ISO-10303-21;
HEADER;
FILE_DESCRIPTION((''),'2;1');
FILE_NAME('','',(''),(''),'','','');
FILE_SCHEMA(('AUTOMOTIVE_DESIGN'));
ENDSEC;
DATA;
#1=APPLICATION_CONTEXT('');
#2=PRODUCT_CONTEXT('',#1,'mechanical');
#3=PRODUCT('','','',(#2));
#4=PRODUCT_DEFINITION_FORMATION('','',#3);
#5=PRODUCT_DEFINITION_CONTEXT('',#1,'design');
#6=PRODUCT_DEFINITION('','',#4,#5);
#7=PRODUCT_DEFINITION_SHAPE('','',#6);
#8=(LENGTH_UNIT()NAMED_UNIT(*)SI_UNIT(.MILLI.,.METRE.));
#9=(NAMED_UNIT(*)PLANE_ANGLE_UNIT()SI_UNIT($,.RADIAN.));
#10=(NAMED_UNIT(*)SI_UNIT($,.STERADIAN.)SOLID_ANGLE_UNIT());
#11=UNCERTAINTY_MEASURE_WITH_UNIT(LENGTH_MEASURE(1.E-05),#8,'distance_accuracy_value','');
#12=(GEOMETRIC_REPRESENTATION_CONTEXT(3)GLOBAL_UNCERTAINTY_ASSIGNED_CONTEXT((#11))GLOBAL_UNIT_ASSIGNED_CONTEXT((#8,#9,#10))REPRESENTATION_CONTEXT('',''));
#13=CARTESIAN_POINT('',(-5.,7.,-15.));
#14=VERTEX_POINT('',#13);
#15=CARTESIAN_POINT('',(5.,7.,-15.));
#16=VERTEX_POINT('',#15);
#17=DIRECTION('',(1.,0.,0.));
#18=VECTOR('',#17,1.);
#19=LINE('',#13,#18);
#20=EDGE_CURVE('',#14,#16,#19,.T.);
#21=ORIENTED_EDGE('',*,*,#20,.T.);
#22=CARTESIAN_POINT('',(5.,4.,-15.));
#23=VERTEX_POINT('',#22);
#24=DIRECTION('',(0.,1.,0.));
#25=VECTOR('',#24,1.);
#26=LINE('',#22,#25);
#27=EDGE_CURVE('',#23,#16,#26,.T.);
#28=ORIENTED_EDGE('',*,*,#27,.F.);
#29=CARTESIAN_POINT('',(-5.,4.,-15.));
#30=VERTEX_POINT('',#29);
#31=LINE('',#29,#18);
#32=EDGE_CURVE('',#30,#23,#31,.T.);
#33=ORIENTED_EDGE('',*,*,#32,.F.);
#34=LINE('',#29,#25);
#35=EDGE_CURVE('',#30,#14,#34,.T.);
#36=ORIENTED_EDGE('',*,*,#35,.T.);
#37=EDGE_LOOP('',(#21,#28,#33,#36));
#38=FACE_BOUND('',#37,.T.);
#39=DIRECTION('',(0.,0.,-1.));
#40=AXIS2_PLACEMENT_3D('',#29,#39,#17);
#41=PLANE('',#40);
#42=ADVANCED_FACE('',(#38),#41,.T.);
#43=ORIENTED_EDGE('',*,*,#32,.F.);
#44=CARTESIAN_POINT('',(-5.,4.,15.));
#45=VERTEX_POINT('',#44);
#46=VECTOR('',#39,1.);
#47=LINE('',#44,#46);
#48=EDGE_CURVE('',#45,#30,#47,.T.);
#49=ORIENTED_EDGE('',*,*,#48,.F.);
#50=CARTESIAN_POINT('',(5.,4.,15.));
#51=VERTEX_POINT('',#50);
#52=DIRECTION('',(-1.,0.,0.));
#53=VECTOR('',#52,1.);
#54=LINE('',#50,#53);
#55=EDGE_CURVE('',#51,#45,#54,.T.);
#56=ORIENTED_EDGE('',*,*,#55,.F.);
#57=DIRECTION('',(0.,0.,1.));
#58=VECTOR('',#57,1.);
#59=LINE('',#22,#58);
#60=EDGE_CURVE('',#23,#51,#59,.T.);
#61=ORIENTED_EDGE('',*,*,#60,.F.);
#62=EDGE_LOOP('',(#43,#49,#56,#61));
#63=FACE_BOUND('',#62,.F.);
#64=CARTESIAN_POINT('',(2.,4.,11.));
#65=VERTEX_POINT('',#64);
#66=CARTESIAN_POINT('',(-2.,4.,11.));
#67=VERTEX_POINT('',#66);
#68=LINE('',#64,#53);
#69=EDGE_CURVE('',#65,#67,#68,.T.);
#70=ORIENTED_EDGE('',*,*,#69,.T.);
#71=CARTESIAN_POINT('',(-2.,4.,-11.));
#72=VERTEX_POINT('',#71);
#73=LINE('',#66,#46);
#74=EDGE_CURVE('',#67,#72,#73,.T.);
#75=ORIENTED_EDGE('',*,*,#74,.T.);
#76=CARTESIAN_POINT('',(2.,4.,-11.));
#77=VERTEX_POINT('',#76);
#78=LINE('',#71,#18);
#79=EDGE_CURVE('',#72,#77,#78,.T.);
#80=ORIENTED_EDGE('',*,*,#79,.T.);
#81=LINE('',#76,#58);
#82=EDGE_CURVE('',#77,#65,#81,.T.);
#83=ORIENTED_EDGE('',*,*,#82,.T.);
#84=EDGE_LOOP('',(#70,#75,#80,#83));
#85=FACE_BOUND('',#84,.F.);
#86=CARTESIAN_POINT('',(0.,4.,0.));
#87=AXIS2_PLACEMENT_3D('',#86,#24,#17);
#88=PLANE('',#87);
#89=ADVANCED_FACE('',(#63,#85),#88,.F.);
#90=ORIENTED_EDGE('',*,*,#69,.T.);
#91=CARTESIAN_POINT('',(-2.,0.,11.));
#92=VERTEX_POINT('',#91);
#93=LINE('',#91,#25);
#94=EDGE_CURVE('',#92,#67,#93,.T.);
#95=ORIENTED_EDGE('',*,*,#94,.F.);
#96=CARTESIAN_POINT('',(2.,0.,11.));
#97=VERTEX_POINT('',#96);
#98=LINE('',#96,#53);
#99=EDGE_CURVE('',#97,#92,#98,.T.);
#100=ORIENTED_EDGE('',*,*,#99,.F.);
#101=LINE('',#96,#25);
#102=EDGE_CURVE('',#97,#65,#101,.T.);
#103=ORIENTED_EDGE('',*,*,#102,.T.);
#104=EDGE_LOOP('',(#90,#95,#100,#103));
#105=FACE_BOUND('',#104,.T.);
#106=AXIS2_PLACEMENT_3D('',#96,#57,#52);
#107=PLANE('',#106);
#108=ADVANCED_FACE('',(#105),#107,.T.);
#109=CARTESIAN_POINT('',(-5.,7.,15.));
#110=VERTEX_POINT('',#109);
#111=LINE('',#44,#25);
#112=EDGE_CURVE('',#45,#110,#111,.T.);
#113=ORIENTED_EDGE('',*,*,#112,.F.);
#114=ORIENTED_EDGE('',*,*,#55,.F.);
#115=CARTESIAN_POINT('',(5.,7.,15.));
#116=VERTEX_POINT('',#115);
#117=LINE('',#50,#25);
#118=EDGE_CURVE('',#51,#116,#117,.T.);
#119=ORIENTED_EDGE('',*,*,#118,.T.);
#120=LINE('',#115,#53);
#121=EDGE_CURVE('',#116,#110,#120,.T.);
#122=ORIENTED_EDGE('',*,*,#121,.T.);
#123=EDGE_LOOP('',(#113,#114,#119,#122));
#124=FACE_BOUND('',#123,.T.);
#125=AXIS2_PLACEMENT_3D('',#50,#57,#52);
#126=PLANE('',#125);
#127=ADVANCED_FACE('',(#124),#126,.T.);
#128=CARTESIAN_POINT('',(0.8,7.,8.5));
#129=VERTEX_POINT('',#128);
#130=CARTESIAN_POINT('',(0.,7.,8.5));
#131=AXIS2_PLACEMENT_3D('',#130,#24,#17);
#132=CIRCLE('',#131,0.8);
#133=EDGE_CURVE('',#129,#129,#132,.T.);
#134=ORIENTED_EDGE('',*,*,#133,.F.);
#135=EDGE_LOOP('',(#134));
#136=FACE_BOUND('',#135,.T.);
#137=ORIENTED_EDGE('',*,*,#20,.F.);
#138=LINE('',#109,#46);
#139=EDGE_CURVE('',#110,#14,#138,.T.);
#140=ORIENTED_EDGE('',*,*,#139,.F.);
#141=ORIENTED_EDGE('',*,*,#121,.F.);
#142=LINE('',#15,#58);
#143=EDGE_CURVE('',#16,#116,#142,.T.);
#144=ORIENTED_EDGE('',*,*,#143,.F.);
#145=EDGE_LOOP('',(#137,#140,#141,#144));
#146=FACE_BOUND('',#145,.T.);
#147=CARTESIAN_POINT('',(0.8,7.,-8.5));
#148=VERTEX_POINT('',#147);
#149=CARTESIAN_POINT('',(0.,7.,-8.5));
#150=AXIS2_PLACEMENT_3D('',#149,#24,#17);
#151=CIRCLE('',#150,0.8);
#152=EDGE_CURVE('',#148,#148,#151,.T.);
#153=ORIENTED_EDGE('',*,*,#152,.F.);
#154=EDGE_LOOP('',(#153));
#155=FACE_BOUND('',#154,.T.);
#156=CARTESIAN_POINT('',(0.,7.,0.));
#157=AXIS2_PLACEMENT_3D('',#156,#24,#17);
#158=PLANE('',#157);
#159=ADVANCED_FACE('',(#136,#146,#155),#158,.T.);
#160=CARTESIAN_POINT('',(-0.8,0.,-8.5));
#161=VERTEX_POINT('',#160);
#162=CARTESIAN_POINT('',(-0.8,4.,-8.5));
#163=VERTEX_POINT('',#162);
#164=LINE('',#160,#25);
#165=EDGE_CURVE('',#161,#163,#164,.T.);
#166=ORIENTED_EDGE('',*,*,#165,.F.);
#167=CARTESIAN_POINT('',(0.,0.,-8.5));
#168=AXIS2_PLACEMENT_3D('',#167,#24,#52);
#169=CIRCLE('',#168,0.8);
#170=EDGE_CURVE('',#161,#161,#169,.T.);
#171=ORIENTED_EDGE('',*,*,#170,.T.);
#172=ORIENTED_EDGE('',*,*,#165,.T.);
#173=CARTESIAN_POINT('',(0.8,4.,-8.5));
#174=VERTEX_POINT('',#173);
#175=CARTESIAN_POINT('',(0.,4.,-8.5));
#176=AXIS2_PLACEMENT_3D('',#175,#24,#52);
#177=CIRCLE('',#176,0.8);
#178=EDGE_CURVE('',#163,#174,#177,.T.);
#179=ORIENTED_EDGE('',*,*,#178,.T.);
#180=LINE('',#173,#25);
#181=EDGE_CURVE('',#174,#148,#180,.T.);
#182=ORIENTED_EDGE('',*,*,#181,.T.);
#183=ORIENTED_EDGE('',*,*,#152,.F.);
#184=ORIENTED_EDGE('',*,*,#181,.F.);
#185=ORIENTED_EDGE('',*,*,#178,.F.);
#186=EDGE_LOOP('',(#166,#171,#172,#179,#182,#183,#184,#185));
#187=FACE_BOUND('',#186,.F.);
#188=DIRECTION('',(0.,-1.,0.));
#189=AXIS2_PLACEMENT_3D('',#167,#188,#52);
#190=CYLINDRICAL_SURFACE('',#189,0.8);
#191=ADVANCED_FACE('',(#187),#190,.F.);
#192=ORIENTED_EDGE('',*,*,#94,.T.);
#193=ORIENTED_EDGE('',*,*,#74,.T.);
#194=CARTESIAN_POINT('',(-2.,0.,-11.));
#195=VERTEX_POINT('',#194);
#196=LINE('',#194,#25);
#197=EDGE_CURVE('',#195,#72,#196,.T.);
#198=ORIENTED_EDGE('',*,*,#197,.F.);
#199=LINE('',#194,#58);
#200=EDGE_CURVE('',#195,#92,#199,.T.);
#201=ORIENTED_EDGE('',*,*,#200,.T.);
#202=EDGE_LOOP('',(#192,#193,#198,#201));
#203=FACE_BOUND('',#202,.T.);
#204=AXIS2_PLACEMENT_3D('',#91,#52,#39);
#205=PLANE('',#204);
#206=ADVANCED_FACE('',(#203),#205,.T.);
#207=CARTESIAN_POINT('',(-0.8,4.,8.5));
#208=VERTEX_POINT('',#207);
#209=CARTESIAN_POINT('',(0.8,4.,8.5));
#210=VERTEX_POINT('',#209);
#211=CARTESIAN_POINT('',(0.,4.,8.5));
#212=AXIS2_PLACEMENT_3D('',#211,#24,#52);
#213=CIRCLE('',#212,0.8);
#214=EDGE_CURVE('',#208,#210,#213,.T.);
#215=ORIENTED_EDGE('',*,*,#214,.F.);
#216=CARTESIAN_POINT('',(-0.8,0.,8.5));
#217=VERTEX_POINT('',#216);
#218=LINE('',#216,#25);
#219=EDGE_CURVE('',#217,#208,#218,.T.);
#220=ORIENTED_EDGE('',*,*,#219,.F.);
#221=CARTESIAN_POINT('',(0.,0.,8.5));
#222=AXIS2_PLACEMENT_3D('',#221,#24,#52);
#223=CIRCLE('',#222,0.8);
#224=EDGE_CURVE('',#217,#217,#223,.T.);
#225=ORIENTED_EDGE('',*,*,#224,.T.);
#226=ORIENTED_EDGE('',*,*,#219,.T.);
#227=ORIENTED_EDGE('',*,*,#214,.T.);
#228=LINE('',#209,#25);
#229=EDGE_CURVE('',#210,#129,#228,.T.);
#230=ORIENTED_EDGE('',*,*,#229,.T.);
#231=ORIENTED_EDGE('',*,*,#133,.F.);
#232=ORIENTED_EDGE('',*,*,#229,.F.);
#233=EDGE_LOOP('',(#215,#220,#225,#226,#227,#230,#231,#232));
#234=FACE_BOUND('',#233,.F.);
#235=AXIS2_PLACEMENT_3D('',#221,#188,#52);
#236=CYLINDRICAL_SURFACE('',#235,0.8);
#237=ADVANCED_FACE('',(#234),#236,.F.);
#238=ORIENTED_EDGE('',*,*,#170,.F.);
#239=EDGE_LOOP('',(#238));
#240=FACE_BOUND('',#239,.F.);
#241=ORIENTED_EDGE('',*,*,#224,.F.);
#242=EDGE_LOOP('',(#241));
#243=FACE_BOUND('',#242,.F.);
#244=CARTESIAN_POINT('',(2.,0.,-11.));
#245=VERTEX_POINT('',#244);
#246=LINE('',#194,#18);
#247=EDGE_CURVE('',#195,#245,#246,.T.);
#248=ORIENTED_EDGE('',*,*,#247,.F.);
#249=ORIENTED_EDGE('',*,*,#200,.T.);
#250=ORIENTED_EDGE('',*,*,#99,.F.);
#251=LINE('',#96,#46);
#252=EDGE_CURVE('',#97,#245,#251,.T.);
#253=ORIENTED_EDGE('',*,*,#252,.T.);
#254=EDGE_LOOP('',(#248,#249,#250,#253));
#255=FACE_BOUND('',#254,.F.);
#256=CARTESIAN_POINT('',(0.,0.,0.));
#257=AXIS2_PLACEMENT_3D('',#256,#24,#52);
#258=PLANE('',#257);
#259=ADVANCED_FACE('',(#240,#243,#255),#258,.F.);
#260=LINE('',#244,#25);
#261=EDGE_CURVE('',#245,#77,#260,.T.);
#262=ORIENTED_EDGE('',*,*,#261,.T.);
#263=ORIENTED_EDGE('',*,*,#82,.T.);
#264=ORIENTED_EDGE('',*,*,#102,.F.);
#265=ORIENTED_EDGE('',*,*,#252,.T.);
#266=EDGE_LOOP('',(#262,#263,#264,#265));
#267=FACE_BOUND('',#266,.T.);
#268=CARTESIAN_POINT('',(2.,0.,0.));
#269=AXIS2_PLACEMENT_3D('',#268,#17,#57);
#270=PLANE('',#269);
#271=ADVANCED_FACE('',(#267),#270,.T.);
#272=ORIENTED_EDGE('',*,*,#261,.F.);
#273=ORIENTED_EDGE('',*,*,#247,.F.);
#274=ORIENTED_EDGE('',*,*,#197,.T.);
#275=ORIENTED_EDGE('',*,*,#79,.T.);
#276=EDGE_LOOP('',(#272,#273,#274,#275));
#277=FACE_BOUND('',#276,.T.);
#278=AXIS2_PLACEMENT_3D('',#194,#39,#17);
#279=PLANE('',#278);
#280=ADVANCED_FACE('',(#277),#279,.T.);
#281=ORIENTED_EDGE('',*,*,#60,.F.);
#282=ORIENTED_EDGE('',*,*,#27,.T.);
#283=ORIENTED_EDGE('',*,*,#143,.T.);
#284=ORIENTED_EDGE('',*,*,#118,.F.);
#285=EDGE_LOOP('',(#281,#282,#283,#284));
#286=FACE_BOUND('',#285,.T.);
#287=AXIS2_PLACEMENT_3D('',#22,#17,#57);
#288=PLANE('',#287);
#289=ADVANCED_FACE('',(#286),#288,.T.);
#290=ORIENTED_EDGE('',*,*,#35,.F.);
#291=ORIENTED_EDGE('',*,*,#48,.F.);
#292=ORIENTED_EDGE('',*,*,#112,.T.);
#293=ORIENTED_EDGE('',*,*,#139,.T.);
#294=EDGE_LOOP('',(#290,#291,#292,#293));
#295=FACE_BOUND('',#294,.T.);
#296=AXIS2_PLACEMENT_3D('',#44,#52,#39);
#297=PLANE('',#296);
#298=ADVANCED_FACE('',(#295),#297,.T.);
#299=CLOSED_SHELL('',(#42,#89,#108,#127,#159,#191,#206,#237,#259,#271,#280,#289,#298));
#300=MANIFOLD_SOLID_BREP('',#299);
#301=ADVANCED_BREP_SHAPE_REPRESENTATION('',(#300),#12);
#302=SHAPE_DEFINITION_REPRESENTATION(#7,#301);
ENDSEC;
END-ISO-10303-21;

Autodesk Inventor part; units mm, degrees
ref_plane "YZ Plane" through (0, 0, 0) normal (1, 0, 0) x (0, 1, 0)
ref_plane "XZ Plane" through (0, 0, 0) normal (0, 1, 0) x (-1, 0, 0)
ref_plane "XY Plane" through (0, 0, 0) normal (0, 0, 1) x (1, 0, 0)
sketch "スケッチ1" plane through (0, 0, 0) normal (0, 1, 0) x (-1, 0, 0)
  line L0 (-2, 11) -> (2, 11)
  line L1 (2, 11) -> (2, -11)
  line L2 (2, -11) -> (-2, -11)
  line L3 (-2, -11) -> (-2, 11)
  line L4 (-2, 11) -> (2, -11) construction
  line L5 (2, 11) -> (-2, -11) construction
  circle A0 centre (0, 8.5) radius 0.8
  line L6 (0, -15.4) -> (0, 15.4) construction
  circle A1 centre (0, -8.5) radius 0.8
  line L7 (2.8, 0) -> (-2.8, 0) projected
  point P0 (0, 0)
  dimension "d0" = 4
  dimension "d1" = 2.5
  dimension "d2" = 1.6
  dimension "d3" = 22
extrude "押し出し1" add sketch "スケッチ1" along normal blind 4
sketch "スケッチ2" plane through (0, 4, 0) normal (0, 1, 0) x (1, 0, 0)
  line L0 (5, -15) -> (-5, -15)
  line L1 (-5, -15) -> (-5, 15)
  line L2 (-5, 15) -> (5, 15)
  line L3 (5, 15) -> (5, -15)
  line L4 (5, -15) -> (-5, 15) construction
  line L5 (-5, -15) -> (5, 15) construction
  line L6 (2, -11) -> (2, 11) projected
  line L7 (2, 11) -> (-2, 11) projected
  line L8 (-2, 11) -> (-2, -11) projected
  line L9 (-2, -11) -> (2, -11) projected
  circle A0 centre (0, 8.5) radius 0.8 projected
  circle A1 centre (0, -8.5) radius 0.8 projected
  point P0 (0, 0)
  dimension "d6" = 30
  dimension "d7" = 10
extrude "押し出し2" add sketch "スケッチ2" along normal blind 3 contours L0 L1 L2 L3 | L9 L8 L7 L6
properties part number "Zigu"
